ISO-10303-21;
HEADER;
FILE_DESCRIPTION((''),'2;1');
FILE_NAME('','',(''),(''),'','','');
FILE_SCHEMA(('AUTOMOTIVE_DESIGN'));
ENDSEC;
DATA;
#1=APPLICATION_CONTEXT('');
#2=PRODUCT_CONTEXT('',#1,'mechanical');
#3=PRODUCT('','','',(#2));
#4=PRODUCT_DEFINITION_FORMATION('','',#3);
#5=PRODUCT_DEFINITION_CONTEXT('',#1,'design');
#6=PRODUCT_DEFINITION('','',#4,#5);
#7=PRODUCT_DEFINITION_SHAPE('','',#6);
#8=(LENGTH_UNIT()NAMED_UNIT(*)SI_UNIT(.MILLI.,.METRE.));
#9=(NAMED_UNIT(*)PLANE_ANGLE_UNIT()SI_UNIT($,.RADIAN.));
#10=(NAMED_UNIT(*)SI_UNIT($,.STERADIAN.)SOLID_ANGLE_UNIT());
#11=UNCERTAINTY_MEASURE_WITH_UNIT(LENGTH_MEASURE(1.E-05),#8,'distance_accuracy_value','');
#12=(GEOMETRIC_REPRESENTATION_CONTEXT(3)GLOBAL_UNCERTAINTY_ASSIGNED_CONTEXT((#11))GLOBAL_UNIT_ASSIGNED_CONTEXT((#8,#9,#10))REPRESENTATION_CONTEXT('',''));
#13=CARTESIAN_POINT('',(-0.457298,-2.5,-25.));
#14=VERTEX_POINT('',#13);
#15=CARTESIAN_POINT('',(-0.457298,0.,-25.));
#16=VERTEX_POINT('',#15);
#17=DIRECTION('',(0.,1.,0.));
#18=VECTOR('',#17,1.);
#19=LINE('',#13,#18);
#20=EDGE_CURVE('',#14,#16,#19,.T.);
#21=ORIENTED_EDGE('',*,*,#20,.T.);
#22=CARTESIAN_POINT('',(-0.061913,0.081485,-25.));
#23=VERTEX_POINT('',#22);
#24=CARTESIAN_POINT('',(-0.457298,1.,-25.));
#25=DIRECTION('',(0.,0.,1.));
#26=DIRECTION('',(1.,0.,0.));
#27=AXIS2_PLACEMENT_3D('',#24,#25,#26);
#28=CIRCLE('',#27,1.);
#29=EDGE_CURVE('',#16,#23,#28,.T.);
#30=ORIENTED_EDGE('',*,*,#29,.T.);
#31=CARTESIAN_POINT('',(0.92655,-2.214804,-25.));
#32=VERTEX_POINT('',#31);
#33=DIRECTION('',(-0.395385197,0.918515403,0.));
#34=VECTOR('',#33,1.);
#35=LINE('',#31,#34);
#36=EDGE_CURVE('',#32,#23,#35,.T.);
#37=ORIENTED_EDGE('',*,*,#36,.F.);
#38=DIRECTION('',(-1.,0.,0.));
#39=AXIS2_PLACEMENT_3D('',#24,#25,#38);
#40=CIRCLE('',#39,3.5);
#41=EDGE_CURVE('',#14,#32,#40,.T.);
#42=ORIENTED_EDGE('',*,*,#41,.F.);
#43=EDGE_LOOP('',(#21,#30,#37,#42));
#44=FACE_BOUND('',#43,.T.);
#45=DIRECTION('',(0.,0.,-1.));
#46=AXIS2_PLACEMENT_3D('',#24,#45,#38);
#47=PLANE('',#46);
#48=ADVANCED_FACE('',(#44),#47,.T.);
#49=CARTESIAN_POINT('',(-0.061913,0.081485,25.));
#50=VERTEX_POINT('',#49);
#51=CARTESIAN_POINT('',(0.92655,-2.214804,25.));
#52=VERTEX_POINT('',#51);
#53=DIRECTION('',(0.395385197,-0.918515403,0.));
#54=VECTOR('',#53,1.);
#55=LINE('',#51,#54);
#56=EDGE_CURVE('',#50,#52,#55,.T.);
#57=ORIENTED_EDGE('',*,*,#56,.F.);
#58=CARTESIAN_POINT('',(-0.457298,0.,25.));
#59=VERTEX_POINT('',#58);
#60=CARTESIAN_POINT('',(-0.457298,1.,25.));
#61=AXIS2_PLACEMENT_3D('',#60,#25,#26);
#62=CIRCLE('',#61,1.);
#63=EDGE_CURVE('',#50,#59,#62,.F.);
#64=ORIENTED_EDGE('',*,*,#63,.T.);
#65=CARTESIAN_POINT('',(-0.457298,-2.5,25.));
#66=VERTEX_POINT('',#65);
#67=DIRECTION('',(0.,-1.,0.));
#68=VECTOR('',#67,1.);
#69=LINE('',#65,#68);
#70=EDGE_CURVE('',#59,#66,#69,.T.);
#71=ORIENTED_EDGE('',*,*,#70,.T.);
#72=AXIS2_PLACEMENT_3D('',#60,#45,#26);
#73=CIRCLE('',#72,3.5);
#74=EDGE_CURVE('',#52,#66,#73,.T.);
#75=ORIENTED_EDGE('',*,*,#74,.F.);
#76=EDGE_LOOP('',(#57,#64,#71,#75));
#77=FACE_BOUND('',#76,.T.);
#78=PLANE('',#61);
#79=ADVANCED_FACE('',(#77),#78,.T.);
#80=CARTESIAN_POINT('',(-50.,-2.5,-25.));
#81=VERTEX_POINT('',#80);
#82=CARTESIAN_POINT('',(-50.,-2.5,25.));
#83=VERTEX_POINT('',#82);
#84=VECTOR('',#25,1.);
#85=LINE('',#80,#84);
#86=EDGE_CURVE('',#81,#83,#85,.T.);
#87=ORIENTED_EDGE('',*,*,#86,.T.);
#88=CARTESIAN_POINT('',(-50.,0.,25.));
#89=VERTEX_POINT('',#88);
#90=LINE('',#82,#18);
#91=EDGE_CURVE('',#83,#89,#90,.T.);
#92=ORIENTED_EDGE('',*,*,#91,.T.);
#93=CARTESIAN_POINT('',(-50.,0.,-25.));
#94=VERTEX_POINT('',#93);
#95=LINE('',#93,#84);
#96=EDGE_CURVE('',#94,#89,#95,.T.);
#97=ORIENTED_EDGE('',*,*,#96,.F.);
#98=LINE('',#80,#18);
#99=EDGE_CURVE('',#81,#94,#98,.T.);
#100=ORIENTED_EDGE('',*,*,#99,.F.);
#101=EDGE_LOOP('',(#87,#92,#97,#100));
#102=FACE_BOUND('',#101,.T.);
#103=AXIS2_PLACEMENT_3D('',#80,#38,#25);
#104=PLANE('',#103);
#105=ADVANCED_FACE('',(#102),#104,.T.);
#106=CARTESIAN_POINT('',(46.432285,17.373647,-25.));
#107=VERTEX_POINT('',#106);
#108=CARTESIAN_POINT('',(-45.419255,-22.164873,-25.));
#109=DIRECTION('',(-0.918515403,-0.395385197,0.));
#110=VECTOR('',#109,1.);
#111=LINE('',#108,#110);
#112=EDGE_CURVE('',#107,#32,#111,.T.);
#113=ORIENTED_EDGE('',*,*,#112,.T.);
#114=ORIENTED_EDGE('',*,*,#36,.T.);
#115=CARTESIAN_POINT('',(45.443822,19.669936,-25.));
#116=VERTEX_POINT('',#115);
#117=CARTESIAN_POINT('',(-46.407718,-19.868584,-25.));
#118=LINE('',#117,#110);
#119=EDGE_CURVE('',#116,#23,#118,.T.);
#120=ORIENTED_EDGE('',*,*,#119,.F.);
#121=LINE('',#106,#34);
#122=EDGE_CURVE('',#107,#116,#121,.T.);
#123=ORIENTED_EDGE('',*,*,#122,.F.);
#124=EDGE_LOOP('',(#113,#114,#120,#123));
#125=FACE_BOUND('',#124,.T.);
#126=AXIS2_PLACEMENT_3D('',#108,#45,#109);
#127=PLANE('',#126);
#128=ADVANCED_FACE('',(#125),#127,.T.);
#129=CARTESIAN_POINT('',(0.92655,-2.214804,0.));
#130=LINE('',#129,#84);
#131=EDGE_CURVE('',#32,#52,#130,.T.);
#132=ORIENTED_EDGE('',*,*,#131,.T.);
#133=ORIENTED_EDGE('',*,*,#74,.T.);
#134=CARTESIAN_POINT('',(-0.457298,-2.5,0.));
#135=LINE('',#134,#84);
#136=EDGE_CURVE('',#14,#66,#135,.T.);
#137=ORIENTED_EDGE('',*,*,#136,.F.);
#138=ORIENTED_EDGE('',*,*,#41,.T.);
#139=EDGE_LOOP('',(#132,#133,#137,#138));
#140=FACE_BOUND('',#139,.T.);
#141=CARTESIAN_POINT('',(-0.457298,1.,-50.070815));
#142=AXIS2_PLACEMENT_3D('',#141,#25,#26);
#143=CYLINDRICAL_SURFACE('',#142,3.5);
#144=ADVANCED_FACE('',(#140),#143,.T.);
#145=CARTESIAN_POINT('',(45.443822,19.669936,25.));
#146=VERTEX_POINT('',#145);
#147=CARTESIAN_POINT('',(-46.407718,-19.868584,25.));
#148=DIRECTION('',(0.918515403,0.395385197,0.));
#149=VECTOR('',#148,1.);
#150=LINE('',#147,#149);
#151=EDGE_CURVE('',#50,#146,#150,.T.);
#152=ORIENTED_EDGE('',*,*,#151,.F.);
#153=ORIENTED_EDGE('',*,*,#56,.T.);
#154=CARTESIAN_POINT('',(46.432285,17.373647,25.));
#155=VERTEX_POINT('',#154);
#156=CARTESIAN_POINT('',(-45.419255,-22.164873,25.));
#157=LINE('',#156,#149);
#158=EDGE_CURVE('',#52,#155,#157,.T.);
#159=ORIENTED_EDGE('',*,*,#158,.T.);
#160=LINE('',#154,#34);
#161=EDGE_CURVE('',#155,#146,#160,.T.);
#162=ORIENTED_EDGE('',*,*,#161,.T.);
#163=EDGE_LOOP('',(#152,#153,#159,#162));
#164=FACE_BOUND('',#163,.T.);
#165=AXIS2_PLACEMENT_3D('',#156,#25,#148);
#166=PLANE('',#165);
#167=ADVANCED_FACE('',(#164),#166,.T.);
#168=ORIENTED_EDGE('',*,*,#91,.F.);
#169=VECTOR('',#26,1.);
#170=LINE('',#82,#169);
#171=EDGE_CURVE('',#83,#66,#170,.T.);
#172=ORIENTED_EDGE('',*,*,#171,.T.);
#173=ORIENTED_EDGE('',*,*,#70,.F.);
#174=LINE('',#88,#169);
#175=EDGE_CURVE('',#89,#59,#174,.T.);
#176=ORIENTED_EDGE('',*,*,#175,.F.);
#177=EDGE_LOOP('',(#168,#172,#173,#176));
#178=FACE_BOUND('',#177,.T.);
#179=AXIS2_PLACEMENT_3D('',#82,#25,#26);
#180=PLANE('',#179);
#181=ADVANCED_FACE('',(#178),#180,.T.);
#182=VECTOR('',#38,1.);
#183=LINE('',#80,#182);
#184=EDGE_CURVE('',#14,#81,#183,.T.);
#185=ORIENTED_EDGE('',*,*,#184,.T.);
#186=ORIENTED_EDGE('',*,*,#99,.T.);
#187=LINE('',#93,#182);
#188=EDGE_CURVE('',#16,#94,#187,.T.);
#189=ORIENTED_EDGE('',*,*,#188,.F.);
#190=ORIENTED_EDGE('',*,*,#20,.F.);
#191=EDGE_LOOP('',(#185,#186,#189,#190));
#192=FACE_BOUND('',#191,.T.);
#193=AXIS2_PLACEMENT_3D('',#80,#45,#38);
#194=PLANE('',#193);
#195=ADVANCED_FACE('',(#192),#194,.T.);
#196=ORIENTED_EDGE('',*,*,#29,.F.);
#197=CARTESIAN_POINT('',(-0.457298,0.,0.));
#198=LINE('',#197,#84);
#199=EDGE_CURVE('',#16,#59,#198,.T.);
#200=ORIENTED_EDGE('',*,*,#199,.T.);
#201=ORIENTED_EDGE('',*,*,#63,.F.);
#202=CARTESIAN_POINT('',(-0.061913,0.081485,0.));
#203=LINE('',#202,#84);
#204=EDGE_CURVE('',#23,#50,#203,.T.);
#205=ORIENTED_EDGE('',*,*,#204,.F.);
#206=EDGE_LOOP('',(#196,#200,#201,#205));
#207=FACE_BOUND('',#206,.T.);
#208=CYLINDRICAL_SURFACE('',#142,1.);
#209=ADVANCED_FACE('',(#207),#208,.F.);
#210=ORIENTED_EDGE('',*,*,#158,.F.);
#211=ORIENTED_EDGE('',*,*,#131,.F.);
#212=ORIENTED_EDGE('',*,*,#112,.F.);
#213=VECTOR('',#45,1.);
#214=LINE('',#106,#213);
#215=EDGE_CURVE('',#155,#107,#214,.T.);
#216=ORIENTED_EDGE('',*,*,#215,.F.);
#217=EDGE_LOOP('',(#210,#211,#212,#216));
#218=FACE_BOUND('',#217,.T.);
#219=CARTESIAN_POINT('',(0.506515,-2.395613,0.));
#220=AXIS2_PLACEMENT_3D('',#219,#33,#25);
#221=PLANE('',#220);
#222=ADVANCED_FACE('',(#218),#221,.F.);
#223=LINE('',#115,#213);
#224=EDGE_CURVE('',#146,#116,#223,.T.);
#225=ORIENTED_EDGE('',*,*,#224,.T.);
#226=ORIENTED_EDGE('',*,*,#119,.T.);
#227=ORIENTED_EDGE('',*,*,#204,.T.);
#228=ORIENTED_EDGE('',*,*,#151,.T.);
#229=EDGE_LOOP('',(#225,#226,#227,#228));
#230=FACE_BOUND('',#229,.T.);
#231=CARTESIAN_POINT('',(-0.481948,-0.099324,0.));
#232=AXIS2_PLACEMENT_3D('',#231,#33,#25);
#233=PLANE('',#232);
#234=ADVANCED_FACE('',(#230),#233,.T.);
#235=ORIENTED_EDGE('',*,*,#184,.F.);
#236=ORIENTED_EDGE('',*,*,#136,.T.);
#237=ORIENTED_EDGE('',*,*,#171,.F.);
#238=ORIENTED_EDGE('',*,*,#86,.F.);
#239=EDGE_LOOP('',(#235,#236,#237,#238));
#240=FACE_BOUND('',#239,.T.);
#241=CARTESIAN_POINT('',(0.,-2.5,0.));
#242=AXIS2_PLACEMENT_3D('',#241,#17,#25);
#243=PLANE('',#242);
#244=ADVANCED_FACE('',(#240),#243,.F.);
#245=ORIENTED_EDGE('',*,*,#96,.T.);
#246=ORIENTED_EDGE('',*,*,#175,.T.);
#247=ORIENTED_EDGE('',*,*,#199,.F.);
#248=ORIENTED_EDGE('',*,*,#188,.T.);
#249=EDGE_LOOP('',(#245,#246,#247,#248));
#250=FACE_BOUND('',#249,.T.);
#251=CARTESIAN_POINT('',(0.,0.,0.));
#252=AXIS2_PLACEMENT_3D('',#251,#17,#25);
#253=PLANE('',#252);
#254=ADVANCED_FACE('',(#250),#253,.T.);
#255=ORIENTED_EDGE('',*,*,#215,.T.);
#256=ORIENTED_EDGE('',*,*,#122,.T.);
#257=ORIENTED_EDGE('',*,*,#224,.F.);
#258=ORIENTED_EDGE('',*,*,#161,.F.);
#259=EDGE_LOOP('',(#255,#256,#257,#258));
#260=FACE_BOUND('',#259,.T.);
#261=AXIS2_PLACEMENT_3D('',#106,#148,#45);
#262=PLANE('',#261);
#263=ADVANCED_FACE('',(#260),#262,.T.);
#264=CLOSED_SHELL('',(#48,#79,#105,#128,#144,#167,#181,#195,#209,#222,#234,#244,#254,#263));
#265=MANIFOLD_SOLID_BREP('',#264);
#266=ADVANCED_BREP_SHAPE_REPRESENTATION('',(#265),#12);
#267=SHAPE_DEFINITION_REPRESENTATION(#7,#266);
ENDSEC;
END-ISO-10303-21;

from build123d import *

# Parameters (mm, degrees)
SKETCH1_W              = 100
SKETCH1_H              = 50
BASE_FLANGE1_DEPTH     = 2.5
SKETCHED_START         = -25
SKETCHED_BEND3_DEPTH   = 50
SKETCHED_BEND3_2_DEPTH = 50


# Read off the part's stored shape, not the designer's step: Sketched Bend3
# Sheet-metal steps are written as plain solids
with BuildPart() as part:
    # Sketch1 → Base-Flange1 (new body)
    with BuildSketch(Plane(origin=(0, 0, 0), x_dir=(1, 0, 0), z_dir=(0, 1, 0))):
        Rectangle(SKETCH1_W, SKETCH1_H)
    extrude(amount=-BASE_FLANGE1_DEPTH)

    # Sketched Bend3 outline → Sketched Bend3 (cut)
    with BuildSketch(Plane.XY.offset(SKETCHED_START)):
        with BuildLine():
            Line((50, 0), (6.071738955, 0))
            Line((6.071738955, 0), (0.92655011, -2.214803911))
            ThreePointArc((0.92655011, -2.214803911), (0.249167174, -2.427959574), (-0.457298081, -2.5))
            Line((-0.457298081, -2.5), (50, -2.5))
            Line((50, -2.5), (50, 0))
        make_face()
    extrude(amount=SKETCHED_BEND3_DEPTH, mode=Mode.SUBTRACT)

    # Sketched Bend3 2 outline → Sketched Bend3 2 (add)
    with BuildSketch(Plane.XY.offset(SKETCHED_START)):
        with BuildLine():
            Line((46.432284933, 17.373647068), (45.443821939, 19.669935575))
            Line((45.443821939, 19.669935575), (-0.061912883, 0.081484597))
            ThreePointArc((-0.061912883, 0.081484597), (-0.255450865, 0.020582979), (-0.457298081, 0))
            Line((-0.457298081, 0), (6.071738955, 0))
            Line((6.071738955, 0), (46.432284933, 17.373647068))
        make_face()
    extrude(amount=SKETCHED_BEND3_2_DEPTH)


solid = part.part
